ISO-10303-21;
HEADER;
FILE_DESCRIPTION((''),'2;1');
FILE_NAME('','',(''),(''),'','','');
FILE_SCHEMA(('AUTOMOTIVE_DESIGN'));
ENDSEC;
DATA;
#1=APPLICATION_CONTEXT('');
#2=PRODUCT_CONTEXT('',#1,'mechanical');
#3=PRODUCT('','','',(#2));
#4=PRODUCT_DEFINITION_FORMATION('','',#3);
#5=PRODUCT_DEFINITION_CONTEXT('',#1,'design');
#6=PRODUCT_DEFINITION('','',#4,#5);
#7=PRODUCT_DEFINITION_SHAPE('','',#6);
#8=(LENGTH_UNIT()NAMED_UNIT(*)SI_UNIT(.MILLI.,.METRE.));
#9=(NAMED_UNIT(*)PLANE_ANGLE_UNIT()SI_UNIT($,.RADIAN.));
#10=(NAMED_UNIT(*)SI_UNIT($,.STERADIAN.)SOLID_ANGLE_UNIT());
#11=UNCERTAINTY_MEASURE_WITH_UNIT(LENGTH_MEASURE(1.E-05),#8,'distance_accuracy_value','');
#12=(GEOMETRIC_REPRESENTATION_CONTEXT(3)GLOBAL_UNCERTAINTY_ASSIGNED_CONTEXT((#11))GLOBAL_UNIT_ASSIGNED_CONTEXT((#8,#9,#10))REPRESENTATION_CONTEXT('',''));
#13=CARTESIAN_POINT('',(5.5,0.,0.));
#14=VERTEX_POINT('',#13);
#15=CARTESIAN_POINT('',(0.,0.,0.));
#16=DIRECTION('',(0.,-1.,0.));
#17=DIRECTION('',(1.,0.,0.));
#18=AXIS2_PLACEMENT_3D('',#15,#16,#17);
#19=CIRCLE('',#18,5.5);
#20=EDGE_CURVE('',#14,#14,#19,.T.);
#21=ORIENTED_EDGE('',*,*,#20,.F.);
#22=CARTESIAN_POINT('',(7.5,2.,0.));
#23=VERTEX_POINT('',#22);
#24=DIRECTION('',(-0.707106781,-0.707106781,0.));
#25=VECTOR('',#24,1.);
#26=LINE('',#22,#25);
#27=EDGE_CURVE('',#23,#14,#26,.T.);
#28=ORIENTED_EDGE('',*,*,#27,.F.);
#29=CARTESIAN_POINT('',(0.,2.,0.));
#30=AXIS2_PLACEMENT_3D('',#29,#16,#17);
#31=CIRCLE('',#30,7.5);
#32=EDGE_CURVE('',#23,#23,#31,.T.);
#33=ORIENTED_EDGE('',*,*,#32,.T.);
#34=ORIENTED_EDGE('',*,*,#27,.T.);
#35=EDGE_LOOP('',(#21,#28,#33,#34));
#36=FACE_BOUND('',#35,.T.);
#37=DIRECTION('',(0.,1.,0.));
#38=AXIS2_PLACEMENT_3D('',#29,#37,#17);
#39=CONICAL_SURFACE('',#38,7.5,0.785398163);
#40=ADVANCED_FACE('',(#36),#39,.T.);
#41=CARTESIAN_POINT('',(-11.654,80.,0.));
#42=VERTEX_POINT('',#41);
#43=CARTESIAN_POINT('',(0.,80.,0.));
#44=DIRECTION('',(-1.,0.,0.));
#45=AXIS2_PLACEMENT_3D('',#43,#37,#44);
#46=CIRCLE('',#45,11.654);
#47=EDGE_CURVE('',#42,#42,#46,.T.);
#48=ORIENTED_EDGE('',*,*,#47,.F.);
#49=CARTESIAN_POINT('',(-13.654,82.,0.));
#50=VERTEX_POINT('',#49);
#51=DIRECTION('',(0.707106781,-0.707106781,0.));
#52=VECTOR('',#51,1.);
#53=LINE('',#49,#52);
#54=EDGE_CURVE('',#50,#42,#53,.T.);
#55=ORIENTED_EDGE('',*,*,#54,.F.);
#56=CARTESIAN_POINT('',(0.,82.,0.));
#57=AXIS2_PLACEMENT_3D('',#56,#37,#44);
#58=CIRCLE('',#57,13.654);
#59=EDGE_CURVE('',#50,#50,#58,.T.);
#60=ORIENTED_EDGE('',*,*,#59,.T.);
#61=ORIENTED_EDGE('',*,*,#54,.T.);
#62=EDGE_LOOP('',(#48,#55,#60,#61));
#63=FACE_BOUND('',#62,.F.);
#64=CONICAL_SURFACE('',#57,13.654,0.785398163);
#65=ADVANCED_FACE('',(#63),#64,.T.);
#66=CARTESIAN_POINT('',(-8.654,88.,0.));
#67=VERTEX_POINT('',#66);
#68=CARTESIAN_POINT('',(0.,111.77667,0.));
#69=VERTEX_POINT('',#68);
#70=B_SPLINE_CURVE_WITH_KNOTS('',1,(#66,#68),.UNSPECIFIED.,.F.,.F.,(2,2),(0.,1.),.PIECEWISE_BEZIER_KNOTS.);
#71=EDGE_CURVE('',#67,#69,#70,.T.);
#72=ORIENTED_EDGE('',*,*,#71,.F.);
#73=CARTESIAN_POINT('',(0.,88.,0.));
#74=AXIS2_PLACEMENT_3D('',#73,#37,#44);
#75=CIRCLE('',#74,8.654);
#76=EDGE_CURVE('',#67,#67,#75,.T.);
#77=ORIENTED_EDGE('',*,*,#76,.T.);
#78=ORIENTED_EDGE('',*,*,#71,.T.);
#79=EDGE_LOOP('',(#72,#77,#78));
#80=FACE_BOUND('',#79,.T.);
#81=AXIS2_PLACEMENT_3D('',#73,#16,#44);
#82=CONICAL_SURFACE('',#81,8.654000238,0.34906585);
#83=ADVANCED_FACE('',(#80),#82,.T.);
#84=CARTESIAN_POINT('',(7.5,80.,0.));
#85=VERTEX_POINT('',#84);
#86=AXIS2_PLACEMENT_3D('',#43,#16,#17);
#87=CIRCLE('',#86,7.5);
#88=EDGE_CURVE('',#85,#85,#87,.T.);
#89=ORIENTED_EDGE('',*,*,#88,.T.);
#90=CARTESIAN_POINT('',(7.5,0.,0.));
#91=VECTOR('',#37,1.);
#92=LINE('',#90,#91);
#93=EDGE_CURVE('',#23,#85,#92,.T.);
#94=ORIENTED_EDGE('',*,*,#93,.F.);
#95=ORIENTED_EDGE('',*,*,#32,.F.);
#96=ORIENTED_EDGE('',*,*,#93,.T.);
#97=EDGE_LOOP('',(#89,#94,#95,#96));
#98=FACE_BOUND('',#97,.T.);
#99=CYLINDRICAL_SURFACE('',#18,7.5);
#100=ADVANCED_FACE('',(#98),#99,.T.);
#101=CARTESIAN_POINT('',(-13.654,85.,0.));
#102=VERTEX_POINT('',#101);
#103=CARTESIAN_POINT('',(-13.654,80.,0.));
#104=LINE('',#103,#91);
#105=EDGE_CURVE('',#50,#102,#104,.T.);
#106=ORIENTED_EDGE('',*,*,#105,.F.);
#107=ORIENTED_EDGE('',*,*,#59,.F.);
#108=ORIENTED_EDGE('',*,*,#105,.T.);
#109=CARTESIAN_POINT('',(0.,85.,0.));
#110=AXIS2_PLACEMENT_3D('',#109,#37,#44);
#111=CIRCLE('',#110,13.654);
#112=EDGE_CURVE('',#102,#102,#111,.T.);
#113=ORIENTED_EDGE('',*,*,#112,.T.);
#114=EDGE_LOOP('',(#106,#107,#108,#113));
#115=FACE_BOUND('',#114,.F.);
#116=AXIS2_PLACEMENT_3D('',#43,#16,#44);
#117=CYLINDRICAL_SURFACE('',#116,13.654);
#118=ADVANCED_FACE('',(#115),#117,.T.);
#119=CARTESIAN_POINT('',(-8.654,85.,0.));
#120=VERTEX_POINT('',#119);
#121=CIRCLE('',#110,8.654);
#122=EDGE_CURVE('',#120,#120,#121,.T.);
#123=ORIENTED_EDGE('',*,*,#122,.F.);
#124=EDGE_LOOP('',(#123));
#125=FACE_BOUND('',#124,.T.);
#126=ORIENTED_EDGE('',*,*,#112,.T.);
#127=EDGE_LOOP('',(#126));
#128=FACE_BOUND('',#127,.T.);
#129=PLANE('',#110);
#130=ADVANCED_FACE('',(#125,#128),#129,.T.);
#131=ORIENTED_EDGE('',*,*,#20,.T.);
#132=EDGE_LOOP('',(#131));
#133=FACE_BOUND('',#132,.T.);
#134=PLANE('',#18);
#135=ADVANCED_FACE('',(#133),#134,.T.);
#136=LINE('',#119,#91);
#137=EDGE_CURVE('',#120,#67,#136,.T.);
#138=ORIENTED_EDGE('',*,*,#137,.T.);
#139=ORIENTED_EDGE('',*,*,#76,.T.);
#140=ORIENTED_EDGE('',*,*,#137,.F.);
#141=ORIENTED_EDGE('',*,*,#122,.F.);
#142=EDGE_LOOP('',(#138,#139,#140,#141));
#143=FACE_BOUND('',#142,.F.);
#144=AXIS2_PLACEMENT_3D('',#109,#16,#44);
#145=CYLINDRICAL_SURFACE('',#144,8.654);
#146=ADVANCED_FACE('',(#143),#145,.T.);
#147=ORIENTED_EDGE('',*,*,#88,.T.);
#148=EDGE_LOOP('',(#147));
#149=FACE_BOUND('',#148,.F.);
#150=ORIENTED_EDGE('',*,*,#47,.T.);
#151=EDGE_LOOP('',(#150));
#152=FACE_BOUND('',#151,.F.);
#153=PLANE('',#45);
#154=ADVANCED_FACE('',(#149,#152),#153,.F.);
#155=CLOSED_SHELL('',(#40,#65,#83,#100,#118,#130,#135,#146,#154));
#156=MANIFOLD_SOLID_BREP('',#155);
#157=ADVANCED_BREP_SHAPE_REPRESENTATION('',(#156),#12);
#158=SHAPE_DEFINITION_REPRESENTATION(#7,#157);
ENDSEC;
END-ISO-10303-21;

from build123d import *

# Parameters (mm, degrees)
F0_R      = 7.5
F1_DEPTH  = 80
F2_R      = 13.654
F3_DEPTH  = 5
F4_R      = 8.6540002376
F5_DEPTH  = 3
F5_FACE_R = 8.6540002376
F7_SIZE   = 2


# Not quite as in the source:
# - an extrude whose draft closes it to a point is written as a loft to that point


with BuildPart() as f1:
    # F0 (on Front) → F1 (new body)
    with BuildSketch(Plane.XZ):
        Circle(F0_R)
    extrude(amount=-F1_DEPTH)

    # F2 (on face) → F3 (join)
    with BuildSketch(Plane(origin=(0, 80, 0), x_dir=(-1, 0, 0), z_dir=(0, 1, 0))):
        Circle(F2_R)
    extrude(amount=F3_DEPTH)

    # F4 (on face) → F5 (join)
    with BuildSketch(Plane(origin=(0, 85, 0), x_dir=(-1, 0, 0), z_dir=(0, 1, 0))):
        Circle(F4_R)
    extrude(amount=F5_DEPTH)

    # F5_face (on face) → F6 section 0
    with BuildSketch(Plane(origin=(0, 88, 0), x_dir=(-1, 0, 0), z_dir=(0, 1, 0)), mode=Mode.PRIVATE) as f6_s0:
        Circle(F5_FACE_R)
    loft([f6_s0.sketch, Vertex(0, 111.7766702407, 0)], ruled=True)

    # F7
    f7_edges = [f1.edges().sort_by_distance(p)[0] for p in [
        (-7.5, 0, 0),
        (13.654, 80, 0),
    ]]
    chamfer(f7_edges, length=F7_SIZE)


solid = f1.part
